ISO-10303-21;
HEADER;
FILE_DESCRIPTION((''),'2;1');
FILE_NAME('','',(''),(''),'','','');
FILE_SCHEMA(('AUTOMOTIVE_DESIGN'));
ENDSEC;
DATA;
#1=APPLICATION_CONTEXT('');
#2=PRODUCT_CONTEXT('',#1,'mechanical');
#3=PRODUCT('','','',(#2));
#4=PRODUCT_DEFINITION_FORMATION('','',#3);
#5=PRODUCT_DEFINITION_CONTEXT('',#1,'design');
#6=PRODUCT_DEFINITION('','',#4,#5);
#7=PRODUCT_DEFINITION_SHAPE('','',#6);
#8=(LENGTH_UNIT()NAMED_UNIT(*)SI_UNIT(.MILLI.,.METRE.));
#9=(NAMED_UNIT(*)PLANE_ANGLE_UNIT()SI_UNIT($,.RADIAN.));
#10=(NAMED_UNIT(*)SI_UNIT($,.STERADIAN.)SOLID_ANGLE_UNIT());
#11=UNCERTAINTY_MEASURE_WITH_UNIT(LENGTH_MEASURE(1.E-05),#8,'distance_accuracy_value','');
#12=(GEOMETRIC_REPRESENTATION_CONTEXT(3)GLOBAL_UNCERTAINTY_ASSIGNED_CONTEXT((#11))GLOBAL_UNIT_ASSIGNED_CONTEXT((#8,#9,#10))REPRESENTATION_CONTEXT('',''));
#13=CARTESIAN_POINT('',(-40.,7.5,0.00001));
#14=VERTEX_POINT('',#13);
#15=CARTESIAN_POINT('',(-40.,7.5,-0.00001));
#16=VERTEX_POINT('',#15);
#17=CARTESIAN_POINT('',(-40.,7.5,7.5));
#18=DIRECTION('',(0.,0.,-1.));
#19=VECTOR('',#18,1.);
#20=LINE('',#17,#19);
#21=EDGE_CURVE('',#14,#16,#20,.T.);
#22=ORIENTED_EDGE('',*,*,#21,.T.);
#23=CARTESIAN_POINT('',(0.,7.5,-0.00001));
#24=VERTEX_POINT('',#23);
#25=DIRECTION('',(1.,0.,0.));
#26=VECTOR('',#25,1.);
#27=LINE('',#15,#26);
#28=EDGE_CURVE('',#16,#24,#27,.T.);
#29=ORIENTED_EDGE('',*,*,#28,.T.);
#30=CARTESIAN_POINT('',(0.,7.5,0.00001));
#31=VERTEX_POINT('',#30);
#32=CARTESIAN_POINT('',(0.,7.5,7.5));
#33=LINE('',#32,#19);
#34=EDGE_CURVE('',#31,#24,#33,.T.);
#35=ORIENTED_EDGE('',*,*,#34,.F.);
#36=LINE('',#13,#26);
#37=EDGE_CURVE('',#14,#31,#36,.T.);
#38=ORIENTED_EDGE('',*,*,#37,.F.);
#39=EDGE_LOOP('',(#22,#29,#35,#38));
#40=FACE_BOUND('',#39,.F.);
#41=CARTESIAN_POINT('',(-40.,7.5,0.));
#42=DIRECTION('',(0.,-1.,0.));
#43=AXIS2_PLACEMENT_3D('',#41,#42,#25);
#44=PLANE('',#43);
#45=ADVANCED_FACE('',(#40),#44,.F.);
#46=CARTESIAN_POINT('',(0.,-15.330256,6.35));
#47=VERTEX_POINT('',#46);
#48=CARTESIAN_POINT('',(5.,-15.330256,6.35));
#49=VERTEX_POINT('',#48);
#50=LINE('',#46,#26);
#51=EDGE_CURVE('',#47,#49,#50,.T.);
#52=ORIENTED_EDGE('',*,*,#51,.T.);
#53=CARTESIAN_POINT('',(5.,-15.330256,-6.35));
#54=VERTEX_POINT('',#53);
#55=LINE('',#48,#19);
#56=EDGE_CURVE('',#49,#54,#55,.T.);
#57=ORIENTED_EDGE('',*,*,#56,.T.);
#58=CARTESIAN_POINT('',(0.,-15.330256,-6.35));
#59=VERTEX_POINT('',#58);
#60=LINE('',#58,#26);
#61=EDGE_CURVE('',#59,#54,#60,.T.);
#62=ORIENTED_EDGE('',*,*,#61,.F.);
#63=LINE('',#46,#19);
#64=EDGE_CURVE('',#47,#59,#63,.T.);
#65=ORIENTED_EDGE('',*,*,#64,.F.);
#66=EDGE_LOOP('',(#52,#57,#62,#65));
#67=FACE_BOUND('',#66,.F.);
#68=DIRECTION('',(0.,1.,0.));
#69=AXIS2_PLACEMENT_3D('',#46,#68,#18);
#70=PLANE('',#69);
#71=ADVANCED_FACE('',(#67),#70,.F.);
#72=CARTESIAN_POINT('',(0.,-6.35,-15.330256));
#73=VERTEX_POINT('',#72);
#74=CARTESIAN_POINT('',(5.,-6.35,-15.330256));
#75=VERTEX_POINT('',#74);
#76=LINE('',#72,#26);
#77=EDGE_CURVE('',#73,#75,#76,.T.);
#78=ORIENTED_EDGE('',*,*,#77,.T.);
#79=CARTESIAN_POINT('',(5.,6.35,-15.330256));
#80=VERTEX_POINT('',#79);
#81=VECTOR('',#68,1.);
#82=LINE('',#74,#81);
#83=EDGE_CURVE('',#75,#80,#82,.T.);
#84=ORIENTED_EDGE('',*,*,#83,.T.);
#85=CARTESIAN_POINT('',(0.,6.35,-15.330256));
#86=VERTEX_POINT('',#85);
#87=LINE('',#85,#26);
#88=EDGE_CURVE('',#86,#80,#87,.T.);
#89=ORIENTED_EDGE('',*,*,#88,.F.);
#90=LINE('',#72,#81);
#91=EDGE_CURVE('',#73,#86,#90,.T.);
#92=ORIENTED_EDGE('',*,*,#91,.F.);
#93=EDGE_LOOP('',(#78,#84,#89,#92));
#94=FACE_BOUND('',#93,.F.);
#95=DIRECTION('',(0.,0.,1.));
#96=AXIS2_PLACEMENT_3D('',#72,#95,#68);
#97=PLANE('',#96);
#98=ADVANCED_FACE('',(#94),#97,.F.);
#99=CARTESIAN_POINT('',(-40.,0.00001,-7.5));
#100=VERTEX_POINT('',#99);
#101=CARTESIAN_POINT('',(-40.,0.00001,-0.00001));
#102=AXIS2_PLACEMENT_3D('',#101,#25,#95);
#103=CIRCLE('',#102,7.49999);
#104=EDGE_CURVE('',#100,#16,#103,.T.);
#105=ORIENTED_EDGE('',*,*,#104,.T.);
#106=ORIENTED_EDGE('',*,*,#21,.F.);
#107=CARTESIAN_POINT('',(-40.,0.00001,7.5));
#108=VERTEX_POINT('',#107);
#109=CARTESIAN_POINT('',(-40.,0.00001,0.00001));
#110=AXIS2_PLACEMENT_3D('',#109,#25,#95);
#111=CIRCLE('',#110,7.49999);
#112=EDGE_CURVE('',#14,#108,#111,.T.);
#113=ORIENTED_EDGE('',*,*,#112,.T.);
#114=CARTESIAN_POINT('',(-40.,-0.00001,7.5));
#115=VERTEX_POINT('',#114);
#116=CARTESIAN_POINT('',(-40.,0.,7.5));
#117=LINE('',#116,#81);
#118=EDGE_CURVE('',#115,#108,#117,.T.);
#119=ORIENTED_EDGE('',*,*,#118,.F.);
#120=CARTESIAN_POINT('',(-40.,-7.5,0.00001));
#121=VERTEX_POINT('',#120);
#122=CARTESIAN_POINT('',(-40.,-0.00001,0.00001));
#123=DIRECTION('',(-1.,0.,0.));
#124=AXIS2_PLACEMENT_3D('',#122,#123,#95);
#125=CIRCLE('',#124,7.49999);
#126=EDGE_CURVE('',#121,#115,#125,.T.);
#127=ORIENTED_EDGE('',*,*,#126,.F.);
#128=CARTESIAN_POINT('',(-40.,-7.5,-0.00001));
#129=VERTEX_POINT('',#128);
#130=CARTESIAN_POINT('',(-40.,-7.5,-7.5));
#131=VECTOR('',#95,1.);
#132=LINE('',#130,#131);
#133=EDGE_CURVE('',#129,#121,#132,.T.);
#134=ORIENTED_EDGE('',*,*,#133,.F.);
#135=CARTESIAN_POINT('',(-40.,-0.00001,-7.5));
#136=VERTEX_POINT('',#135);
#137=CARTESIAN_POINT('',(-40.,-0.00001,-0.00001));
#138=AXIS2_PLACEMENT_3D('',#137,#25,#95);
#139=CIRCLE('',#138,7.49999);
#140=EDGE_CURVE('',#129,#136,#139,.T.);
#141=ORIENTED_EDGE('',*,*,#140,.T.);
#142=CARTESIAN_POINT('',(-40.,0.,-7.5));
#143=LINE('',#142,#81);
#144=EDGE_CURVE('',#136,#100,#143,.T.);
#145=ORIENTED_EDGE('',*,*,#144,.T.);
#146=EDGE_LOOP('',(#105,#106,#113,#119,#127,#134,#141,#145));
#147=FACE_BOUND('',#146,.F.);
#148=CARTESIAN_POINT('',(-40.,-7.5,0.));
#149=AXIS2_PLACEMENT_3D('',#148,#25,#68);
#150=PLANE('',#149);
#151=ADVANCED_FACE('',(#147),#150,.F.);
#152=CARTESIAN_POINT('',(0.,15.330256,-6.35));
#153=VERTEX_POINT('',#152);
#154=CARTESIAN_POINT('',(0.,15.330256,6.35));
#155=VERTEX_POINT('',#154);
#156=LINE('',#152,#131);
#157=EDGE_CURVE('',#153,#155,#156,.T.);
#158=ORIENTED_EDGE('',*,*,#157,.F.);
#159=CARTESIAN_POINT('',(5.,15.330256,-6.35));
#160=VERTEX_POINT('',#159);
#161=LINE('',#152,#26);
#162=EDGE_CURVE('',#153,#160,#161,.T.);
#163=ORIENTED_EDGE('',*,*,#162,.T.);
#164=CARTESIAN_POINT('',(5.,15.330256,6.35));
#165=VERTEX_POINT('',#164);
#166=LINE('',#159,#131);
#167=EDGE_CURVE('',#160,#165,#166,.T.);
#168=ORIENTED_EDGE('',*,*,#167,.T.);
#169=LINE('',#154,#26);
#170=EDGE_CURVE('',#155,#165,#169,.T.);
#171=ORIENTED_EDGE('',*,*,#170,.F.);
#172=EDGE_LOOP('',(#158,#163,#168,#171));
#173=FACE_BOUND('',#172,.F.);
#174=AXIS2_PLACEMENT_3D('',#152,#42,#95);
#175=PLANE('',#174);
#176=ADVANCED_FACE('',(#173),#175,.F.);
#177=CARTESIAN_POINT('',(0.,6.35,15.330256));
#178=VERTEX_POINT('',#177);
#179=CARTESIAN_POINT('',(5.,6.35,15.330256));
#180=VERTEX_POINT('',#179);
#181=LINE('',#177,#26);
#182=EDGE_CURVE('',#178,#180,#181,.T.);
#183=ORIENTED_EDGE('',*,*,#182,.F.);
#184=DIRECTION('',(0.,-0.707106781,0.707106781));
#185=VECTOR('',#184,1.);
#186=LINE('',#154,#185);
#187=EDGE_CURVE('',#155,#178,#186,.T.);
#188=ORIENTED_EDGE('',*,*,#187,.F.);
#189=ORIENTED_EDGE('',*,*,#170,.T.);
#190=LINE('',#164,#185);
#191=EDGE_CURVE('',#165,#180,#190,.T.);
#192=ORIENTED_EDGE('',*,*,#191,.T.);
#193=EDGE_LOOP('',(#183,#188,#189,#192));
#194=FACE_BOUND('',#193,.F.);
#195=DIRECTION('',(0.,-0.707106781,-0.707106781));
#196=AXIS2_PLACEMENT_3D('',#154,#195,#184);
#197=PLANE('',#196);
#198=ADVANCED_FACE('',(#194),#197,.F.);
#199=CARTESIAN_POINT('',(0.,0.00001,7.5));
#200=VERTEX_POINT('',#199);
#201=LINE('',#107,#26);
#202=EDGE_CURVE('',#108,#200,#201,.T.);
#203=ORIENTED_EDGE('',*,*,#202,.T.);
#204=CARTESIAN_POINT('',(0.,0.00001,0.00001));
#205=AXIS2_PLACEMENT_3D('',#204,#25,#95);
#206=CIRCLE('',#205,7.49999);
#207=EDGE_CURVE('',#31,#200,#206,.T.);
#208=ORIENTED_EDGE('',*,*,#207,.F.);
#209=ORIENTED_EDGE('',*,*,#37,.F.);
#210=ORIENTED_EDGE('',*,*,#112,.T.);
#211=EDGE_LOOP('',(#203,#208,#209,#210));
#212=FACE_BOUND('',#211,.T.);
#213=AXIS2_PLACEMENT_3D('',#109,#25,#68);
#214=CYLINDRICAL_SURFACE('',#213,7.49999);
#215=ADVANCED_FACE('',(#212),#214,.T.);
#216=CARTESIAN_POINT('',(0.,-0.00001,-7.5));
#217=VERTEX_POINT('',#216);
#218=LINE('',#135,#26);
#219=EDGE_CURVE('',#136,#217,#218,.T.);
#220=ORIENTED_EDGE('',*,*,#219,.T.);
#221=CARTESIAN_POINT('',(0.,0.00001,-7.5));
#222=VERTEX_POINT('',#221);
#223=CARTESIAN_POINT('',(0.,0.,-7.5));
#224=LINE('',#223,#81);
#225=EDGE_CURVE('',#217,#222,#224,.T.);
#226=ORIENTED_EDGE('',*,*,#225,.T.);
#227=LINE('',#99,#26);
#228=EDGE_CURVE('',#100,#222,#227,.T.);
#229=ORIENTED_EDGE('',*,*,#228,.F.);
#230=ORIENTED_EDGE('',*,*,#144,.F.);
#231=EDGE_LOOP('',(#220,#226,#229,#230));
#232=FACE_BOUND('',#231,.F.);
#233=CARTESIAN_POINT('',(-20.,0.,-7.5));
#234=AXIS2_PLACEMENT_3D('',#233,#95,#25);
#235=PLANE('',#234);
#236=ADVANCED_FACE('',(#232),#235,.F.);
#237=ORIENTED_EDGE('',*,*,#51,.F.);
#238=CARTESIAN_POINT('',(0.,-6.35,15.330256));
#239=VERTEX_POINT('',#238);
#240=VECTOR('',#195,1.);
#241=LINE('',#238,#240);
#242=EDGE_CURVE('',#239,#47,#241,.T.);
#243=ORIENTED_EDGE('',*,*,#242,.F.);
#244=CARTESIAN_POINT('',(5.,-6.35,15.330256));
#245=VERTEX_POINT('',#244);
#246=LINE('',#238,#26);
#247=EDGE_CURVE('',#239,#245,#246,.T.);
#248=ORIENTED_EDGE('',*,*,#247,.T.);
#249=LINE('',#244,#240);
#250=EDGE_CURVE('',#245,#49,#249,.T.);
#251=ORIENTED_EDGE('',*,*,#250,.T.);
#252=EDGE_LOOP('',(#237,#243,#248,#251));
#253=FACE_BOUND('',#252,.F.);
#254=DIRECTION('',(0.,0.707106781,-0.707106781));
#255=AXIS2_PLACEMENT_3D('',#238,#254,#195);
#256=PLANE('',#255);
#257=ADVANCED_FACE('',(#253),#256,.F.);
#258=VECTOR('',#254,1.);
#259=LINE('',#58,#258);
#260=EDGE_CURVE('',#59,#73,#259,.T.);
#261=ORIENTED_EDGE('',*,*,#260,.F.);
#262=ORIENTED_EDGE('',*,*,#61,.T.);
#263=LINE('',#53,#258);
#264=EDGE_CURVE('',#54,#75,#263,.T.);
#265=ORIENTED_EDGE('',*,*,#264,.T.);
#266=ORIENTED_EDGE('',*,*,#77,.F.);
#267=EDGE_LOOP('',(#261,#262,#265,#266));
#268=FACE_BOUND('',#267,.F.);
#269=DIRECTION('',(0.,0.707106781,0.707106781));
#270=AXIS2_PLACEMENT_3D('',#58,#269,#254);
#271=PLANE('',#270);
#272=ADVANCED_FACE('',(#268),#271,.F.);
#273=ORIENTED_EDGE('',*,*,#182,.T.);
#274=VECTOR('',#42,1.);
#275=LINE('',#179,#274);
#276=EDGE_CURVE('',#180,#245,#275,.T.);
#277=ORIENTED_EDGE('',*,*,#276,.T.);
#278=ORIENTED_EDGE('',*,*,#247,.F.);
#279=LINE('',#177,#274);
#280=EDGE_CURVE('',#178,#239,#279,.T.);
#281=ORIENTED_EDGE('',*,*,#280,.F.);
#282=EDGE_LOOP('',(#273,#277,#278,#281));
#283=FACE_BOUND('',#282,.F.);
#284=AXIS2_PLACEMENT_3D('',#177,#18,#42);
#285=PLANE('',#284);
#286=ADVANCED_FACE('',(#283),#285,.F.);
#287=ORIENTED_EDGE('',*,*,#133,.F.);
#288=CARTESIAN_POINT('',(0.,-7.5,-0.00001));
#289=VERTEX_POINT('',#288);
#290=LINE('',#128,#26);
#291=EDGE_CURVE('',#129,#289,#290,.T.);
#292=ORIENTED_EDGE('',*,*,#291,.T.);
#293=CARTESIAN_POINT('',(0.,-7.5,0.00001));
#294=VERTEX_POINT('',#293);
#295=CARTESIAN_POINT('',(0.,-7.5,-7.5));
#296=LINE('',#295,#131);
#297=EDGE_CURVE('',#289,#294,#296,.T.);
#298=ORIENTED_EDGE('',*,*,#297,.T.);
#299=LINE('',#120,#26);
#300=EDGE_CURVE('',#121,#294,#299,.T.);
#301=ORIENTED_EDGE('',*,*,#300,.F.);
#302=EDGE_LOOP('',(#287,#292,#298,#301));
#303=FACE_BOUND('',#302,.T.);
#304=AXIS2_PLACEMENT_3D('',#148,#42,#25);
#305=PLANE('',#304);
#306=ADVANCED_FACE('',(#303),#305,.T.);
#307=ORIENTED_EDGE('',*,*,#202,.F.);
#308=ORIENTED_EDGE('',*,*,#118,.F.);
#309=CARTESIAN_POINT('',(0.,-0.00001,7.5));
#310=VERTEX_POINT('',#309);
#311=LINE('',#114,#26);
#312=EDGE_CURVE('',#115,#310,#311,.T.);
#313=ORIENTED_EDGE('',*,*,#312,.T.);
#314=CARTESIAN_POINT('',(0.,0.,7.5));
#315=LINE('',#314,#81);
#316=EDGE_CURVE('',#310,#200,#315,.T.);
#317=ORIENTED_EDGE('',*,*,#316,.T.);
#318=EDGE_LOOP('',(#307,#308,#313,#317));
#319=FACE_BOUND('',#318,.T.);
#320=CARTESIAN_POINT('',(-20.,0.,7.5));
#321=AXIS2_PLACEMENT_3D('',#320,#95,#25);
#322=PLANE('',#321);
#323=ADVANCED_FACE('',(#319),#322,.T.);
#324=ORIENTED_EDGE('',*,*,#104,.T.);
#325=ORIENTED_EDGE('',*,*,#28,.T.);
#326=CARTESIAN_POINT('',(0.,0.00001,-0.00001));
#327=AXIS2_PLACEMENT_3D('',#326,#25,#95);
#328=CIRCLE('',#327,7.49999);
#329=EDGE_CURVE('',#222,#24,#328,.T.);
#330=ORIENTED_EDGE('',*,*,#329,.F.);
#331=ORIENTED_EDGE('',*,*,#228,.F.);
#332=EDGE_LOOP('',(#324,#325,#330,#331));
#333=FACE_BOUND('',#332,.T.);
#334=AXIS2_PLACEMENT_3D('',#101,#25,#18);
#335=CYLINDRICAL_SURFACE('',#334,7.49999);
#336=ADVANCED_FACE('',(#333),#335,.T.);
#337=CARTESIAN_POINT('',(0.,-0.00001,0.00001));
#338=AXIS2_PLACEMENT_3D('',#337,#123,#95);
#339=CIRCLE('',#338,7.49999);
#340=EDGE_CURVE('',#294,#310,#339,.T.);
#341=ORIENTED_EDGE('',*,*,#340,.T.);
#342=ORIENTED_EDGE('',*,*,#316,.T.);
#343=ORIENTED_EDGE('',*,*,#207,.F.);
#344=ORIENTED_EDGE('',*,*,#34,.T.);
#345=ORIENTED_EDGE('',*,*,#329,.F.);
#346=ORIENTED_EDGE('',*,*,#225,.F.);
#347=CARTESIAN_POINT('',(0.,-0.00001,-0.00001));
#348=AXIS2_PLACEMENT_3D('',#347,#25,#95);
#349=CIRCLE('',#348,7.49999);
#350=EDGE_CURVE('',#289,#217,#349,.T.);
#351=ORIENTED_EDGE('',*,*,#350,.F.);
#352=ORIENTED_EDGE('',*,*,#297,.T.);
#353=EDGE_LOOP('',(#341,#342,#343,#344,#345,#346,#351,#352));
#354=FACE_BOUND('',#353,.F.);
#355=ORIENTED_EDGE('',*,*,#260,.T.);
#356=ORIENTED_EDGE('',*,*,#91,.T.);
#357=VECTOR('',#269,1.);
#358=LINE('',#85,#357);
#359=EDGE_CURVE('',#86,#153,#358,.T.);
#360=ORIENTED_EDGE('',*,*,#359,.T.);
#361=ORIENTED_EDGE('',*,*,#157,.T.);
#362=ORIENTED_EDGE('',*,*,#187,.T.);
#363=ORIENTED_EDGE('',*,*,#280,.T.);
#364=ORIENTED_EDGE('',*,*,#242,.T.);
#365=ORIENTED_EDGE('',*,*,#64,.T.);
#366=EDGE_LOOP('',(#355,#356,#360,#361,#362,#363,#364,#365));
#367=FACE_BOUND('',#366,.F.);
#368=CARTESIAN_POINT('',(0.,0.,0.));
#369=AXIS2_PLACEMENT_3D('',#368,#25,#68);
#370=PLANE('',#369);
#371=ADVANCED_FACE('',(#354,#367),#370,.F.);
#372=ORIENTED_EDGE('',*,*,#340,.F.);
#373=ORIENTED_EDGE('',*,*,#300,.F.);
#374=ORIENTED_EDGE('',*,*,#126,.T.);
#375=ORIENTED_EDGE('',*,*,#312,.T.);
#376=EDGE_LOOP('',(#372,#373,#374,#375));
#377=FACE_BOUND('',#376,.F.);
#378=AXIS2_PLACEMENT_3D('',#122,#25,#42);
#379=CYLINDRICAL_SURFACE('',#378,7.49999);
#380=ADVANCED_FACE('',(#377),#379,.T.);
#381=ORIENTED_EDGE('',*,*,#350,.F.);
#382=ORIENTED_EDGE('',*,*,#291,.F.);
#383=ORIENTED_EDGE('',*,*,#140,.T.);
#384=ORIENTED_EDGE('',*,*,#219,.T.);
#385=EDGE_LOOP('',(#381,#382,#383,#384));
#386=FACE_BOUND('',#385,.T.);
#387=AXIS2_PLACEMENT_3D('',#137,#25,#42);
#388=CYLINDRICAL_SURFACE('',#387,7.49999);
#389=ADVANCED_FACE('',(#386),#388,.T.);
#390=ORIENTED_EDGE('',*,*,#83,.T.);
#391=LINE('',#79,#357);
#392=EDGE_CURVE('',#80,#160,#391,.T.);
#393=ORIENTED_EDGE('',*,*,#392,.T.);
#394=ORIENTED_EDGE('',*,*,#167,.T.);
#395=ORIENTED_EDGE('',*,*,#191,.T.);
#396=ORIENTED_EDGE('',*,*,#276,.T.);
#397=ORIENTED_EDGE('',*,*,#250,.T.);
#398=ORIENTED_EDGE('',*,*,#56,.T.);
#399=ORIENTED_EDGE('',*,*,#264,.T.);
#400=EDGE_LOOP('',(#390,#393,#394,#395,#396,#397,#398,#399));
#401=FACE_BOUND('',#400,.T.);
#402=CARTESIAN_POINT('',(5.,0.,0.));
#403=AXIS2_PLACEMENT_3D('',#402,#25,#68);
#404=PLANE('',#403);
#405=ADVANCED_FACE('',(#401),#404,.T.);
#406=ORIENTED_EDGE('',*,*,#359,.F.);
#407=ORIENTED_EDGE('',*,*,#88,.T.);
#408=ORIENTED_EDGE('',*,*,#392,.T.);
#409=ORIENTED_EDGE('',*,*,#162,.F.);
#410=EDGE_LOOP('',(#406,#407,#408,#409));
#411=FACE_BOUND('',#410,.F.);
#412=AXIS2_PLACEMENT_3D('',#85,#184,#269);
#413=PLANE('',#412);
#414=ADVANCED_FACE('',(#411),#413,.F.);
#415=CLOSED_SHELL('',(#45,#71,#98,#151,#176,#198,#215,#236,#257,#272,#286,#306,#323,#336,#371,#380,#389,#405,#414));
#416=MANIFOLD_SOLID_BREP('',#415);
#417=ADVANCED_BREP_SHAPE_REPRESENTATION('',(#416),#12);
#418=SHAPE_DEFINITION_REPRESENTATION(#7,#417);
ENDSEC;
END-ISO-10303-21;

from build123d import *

# Parameters (mm, degrees)
F2_DEPTH = 5
F1_W     = 40
F1_H     = 15
F3_DEPTH = 7.5
F4_R     = 7.49999


# Not quite as in the source:
# - a fillet or chamfer is up to 0.001 mm smaller than in the source, because OpenCascade refuses the exact size


with BuildPart() as f2:
    # F0 (on Right) → F2 (new body)
    with BuildSketch(Plane.YZ):
        Polygon((15.3302561211, -6.35), (15.3302561211, 6.35), (6.35, 15.3302561211), (-6.35, 15.3302561211), (-15.3302561211, 6.35), (-15.3302561211, -6.35), (-6.35, -15.3302561211), (6.35, -15.3302561211), align=None)
    extrude(amount=F2_DEPTH)

    # F1 (on Top) → F3 (join, symmetric)
    with BuildSketch(Plane.XY):
        with Locations((-20, 0)):
            Rectangle(F1_W, F1_H)
    extrude(amount=F3_DEPTH, both=True)

    # F4 (radius 7.5 in the source; OpenCascade refuses exactly that, so slightly less here)
    f4_edges = [f2.edges().sort_by_distance(p)[0] for p in [
        (-20, 7.5, 7.5),
        (-20, 7.5, -7.5),
        (-20, -7.5, -7.5),
        (-20, -7.5, 7.5),
    ]]
    fillet(f4_edges, radius=F4_R)


solid = f2.part
